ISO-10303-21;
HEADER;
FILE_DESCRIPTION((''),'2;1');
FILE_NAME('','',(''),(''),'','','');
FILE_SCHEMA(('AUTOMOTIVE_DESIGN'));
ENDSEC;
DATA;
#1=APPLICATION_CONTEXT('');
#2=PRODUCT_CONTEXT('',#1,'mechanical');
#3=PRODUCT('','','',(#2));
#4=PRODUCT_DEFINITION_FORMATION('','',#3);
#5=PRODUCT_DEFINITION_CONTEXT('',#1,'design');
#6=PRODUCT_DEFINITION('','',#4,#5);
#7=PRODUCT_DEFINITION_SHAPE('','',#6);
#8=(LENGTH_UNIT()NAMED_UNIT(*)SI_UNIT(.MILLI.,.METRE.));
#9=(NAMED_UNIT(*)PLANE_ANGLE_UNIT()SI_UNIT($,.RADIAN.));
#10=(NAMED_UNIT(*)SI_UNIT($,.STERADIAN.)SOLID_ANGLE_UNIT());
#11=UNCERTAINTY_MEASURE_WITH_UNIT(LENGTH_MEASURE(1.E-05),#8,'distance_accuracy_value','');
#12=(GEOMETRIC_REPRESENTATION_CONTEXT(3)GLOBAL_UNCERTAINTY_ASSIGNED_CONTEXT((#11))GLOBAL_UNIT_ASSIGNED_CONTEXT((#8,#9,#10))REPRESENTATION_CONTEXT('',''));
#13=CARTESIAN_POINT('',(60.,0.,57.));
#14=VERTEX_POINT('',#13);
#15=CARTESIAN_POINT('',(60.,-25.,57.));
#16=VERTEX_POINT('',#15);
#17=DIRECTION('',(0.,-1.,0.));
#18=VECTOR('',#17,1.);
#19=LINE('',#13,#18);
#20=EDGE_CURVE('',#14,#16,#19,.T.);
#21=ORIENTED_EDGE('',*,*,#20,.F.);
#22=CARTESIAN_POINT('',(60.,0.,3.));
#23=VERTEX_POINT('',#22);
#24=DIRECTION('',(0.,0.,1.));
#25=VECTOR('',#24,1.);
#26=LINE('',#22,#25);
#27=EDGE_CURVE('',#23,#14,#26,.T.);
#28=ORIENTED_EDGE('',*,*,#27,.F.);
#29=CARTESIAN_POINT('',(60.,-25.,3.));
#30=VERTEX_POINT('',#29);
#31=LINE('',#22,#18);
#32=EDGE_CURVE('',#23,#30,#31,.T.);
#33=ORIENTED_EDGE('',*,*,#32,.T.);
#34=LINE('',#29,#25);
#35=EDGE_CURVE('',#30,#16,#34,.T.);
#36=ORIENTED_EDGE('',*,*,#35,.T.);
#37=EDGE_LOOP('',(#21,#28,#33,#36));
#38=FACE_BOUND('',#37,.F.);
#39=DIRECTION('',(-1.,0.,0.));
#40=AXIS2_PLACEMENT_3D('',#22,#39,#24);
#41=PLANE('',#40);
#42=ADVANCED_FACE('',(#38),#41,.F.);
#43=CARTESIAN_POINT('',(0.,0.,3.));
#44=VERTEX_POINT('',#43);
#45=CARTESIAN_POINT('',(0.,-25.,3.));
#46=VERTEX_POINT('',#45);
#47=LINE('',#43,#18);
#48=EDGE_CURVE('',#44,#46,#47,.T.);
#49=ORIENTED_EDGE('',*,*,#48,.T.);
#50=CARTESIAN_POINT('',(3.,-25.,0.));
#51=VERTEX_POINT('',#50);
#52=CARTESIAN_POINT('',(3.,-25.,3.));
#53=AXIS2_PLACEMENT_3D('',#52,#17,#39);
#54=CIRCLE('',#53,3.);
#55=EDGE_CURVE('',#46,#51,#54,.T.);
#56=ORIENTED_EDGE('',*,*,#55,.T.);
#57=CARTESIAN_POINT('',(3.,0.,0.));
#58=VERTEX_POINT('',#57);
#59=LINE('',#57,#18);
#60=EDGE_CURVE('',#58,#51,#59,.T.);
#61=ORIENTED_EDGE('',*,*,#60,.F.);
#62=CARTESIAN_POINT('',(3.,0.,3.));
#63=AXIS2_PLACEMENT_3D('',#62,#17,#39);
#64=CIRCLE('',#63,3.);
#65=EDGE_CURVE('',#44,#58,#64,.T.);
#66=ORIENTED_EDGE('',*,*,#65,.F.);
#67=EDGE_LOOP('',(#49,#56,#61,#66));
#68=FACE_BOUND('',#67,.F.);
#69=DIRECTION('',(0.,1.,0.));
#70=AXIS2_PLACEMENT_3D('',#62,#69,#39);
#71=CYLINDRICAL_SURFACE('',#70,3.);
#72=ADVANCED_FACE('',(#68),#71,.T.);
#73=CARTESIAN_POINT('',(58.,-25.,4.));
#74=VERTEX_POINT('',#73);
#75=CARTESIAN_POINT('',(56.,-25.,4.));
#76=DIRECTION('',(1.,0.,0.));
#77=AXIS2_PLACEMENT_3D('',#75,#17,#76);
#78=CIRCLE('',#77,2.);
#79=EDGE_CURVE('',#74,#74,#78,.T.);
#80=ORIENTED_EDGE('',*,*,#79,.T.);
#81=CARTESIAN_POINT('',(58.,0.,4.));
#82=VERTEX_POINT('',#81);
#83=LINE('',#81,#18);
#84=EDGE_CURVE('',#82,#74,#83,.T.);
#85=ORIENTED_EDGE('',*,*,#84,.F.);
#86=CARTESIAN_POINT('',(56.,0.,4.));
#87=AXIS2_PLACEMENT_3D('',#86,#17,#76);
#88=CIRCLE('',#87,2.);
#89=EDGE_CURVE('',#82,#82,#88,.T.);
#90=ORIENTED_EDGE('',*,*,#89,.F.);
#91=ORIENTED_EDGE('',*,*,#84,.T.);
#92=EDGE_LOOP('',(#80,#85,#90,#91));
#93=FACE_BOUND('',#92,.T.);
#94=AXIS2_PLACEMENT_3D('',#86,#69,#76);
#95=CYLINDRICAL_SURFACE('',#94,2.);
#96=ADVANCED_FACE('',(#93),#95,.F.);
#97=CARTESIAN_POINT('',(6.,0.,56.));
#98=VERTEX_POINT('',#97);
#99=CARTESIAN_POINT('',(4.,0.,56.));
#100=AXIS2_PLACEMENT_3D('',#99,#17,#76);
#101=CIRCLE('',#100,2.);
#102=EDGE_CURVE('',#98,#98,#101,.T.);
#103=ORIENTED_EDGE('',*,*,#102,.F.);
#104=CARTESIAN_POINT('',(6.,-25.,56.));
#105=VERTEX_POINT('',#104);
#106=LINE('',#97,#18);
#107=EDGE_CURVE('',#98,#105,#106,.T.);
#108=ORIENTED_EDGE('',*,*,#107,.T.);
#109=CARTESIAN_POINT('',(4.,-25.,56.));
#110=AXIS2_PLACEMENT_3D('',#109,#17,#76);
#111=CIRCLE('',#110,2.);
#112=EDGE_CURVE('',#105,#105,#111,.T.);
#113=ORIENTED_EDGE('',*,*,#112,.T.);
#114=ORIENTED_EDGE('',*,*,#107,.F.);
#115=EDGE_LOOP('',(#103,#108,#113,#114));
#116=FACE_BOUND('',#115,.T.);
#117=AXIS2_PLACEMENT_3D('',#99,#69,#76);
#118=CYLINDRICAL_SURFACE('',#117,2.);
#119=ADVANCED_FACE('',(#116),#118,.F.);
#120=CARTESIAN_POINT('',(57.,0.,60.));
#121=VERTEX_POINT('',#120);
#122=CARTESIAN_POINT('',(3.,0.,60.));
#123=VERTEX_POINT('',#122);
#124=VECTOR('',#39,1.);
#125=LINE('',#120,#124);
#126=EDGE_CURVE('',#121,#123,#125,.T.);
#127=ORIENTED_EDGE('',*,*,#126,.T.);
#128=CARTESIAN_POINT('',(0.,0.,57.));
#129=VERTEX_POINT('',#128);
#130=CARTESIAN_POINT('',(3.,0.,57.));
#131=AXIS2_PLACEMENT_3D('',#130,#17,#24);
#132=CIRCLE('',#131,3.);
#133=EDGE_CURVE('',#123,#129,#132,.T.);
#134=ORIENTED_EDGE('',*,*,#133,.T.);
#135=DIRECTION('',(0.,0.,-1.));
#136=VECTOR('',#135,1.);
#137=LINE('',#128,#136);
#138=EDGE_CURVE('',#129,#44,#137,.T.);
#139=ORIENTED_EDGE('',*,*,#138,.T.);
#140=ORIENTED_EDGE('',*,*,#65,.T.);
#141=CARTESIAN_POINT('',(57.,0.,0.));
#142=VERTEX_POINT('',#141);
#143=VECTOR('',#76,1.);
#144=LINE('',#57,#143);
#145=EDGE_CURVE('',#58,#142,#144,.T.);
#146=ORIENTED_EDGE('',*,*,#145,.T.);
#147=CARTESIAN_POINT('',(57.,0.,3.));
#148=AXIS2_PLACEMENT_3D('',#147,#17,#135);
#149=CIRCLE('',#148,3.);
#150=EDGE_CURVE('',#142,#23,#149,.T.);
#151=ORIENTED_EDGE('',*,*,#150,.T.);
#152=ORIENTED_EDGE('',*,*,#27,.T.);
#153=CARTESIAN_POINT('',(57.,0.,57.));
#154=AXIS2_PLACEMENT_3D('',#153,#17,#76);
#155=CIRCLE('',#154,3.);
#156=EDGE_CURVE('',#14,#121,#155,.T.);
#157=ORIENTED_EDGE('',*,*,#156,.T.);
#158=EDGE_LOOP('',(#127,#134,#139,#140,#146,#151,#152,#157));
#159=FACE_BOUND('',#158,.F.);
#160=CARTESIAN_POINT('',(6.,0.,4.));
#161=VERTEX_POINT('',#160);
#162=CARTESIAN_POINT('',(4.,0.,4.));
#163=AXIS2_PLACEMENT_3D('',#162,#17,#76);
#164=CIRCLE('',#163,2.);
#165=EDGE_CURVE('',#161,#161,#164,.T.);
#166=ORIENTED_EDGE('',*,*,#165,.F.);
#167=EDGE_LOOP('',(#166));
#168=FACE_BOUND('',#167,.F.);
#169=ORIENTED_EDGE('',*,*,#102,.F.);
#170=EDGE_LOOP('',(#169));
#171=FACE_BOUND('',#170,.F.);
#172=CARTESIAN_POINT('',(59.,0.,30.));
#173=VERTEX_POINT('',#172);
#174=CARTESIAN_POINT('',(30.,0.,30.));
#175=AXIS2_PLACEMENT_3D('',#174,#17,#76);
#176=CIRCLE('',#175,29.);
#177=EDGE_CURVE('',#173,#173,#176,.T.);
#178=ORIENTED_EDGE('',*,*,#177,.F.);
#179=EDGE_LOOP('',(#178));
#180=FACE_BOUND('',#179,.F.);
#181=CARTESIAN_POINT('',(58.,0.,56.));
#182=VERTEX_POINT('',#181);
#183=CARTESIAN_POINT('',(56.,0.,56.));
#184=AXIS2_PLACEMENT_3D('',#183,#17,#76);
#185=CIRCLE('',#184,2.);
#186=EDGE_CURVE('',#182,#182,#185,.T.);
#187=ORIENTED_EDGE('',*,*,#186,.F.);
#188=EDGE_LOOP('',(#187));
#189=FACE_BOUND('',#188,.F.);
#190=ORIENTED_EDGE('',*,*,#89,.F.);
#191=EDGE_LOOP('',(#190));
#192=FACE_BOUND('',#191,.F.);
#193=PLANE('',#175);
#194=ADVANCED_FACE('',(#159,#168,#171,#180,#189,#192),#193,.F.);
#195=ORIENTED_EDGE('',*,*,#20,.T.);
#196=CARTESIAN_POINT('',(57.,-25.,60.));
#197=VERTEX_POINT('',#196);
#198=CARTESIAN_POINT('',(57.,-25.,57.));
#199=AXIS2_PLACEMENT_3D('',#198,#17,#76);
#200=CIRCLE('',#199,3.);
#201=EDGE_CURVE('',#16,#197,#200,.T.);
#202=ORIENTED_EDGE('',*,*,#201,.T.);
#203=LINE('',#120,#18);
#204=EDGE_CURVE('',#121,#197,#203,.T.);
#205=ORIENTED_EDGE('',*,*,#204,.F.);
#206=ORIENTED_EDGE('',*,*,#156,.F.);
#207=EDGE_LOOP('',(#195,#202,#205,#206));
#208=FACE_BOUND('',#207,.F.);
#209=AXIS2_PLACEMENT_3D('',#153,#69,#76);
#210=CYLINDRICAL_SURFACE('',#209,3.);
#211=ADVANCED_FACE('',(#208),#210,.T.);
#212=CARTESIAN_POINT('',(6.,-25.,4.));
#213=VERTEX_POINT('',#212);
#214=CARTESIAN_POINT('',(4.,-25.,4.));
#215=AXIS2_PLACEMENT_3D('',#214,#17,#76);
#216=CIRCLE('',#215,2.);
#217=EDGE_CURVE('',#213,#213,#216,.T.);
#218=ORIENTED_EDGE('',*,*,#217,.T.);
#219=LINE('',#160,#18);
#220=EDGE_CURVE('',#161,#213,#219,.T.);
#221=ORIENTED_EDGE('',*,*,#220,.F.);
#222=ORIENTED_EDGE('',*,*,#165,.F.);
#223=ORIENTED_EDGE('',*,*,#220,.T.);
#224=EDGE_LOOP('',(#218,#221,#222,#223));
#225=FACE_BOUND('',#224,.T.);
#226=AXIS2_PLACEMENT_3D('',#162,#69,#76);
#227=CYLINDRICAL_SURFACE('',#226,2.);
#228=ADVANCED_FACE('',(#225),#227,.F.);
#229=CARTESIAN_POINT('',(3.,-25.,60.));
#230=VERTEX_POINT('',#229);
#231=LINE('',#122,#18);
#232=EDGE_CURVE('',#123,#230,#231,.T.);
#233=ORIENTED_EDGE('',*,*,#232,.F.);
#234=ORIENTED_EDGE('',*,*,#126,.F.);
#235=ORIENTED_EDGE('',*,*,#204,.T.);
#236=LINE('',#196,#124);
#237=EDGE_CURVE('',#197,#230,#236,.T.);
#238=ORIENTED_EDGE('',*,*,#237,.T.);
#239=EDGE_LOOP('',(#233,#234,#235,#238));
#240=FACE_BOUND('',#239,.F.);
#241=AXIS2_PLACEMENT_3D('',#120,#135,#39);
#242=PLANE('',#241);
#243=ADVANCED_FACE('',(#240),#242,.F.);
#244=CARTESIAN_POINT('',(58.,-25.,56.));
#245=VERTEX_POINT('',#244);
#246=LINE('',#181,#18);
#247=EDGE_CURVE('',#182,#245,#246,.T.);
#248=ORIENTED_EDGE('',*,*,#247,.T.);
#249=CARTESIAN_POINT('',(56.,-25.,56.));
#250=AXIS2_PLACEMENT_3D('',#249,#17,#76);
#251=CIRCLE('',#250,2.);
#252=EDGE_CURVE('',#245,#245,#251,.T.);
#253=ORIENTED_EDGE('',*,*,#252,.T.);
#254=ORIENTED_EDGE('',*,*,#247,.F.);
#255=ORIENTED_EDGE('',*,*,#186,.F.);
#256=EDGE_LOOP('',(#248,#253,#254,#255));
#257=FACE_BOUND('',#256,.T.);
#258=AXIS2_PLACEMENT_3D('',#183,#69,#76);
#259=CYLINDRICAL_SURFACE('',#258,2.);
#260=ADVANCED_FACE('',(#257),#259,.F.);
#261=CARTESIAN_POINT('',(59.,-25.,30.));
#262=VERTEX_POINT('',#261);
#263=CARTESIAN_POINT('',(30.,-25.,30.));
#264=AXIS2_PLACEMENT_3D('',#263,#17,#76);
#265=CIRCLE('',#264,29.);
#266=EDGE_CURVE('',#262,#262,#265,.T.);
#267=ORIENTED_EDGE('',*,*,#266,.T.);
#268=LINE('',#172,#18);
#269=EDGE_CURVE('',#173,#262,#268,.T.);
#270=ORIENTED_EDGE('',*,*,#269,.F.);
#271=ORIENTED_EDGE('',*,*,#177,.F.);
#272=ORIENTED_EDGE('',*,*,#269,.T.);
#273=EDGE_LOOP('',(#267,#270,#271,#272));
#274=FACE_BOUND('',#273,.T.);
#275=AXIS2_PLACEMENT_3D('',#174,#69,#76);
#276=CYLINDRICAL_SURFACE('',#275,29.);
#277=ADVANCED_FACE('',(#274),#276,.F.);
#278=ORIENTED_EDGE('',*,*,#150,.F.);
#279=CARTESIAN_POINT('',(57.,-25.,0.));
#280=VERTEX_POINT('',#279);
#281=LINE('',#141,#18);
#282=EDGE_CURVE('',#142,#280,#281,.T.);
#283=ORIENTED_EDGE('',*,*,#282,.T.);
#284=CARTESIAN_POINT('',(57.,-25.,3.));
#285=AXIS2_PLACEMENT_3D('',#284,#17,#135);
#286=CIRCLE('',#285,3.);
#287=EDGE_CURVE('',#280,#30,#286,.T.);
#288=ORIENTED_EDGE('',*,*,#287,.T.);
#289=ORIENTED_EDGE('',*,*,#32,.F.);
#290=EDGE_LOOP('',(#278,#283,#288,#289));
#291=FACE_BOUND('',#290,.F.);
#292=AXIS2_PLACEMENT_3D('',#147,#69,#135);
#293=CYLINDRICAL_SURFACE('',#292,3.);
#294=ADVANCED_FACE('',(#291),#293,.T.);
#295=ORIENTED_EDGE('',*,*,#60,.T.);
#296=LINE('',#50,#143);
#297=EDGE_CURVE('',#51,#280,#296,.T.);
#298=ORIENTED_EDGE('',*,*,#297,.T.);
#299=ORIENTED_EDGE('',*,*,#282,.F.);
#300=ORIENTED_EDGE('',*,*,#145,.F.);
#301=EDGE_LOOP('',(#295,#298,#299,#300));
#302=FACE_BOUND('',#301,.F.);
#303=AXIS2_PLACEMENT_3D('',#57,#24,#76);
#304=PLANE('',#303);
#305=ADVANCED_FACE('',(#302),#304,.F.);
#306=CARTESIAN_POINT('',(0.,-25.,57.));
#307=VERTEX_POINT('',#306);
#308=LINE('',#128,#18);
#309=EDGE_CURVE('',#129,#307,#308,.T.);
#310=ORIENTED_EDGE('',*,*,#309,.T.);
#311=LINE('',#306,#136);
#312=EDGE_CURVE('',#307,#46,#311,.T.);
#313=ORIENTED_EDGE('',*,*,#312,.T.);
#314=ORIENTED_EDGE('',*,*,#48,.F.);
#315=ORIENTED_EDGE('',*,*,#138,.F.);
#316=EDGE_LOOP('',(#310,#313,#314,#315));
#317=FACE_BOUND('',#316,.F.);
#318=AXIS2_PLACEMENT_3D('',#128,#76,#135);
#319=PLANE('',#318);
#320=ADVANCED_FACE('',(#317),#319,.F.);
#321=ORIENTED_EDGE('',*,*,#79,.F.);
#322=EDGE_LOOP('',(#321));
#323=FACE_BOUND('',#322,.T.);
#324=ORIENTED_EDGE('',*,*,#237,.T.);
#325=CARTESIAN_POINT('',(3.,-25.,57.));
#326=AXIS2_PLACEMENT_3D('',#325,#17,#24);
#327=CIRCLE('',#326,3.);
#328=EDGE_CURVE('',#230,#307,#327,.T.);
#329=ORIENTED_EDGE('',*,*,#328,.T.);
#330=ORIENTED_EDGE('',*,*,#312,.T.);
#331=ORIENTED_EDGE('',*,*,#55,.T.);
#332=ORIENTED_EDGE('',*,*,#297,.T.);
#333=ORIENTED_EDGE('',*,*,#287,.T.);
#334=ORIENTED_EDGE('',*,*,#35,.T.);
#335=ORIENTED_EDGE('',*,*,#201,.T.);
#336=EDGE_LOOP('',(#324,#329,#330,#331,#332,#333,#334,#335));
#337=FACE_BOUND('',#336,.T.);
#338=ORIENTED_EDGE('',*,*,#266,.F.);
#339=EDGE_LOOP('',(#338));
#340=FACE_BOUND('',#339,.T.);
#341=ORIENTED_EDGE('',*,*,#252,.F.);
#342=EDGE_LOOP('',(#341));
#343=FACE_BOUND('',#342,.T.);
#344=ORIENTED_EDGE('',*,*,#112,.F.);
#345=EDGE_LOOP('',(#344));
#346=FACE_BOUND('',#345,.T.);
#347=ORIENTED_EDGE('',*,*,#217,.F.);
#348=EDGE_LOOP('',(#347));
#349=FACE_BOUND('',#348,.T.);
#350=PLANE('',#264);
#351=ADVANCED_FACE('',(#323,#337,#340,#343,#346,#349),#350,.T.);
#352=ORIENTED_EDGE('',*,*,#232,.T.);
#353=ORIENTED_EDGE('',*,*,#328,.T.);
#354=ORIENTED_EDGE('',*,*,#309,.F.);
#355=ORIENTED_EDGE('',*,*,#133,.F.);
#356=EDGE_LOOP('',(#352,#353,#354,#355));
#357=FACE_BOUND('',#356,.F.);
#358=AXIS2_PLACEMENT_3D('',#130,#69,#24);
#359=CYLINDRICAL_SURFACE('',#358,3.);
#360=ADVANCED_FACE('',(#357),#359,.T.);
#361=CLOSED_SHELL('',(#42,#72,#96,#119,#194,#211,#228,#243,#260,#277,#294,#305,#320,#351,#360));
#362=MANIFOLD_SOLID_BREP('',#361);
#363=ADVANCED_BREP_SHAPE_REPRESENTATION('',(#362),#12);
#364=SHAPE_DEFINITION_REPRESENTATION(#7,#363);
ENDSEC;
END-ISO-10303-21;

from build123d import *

# Parameters (mm, degrees)
F0_R     = 2
F0_R_2   = 29
F1_DEPTH = 25


# Not quite as in the source:
# - a feature of the source that left no trace in its solid (it failed there, or was rolled back) is left out


with BuildPart() as f1:
    # F0 (on Front) → F1 (new body)
    with BuildSketch(Plane.XZ):
        with BuildLine():
            ThreePointArc((0, 3), (0.8786796564, 0.8786796564), (3, 0))
            Line((3, 0), (57, 0))
            ThreePointArc((57, 0), (59.1213203436, 0.8786796564), (60, 3))
            Line((60, 3), (60, 57))
            ThreePointArc((60, 57), (59.1213203436, 59.1213203436), (57, 60))
            Line((57, 60), (3, 60))
            ThreePointArc((3, 60), (0.8786796564, 59.1213203436), (0, 57))
            Line((0, 57), (0, 3))
        make_face()
        with Locations((4, 4)):
            Circle(F0_R, mode=Mode.SUBTRACT)
        with Locations((56, 4)):
            Circle(F0_R, mode=Mode.SUBTRACT)
        with Locations((4, 56)):
            Circle(F0_R, mode=Mode.SUBTRACT)
        with Locations((30, 30)):
            Circle(F0_R_2, mode=Mode.SUBTRACT)
        with Locations((56, 56)):
            Circle(F0_R, mode=Mode.SUBTRACT)
    extrude(amount=F1_DEPTH)


solid = f1.part
